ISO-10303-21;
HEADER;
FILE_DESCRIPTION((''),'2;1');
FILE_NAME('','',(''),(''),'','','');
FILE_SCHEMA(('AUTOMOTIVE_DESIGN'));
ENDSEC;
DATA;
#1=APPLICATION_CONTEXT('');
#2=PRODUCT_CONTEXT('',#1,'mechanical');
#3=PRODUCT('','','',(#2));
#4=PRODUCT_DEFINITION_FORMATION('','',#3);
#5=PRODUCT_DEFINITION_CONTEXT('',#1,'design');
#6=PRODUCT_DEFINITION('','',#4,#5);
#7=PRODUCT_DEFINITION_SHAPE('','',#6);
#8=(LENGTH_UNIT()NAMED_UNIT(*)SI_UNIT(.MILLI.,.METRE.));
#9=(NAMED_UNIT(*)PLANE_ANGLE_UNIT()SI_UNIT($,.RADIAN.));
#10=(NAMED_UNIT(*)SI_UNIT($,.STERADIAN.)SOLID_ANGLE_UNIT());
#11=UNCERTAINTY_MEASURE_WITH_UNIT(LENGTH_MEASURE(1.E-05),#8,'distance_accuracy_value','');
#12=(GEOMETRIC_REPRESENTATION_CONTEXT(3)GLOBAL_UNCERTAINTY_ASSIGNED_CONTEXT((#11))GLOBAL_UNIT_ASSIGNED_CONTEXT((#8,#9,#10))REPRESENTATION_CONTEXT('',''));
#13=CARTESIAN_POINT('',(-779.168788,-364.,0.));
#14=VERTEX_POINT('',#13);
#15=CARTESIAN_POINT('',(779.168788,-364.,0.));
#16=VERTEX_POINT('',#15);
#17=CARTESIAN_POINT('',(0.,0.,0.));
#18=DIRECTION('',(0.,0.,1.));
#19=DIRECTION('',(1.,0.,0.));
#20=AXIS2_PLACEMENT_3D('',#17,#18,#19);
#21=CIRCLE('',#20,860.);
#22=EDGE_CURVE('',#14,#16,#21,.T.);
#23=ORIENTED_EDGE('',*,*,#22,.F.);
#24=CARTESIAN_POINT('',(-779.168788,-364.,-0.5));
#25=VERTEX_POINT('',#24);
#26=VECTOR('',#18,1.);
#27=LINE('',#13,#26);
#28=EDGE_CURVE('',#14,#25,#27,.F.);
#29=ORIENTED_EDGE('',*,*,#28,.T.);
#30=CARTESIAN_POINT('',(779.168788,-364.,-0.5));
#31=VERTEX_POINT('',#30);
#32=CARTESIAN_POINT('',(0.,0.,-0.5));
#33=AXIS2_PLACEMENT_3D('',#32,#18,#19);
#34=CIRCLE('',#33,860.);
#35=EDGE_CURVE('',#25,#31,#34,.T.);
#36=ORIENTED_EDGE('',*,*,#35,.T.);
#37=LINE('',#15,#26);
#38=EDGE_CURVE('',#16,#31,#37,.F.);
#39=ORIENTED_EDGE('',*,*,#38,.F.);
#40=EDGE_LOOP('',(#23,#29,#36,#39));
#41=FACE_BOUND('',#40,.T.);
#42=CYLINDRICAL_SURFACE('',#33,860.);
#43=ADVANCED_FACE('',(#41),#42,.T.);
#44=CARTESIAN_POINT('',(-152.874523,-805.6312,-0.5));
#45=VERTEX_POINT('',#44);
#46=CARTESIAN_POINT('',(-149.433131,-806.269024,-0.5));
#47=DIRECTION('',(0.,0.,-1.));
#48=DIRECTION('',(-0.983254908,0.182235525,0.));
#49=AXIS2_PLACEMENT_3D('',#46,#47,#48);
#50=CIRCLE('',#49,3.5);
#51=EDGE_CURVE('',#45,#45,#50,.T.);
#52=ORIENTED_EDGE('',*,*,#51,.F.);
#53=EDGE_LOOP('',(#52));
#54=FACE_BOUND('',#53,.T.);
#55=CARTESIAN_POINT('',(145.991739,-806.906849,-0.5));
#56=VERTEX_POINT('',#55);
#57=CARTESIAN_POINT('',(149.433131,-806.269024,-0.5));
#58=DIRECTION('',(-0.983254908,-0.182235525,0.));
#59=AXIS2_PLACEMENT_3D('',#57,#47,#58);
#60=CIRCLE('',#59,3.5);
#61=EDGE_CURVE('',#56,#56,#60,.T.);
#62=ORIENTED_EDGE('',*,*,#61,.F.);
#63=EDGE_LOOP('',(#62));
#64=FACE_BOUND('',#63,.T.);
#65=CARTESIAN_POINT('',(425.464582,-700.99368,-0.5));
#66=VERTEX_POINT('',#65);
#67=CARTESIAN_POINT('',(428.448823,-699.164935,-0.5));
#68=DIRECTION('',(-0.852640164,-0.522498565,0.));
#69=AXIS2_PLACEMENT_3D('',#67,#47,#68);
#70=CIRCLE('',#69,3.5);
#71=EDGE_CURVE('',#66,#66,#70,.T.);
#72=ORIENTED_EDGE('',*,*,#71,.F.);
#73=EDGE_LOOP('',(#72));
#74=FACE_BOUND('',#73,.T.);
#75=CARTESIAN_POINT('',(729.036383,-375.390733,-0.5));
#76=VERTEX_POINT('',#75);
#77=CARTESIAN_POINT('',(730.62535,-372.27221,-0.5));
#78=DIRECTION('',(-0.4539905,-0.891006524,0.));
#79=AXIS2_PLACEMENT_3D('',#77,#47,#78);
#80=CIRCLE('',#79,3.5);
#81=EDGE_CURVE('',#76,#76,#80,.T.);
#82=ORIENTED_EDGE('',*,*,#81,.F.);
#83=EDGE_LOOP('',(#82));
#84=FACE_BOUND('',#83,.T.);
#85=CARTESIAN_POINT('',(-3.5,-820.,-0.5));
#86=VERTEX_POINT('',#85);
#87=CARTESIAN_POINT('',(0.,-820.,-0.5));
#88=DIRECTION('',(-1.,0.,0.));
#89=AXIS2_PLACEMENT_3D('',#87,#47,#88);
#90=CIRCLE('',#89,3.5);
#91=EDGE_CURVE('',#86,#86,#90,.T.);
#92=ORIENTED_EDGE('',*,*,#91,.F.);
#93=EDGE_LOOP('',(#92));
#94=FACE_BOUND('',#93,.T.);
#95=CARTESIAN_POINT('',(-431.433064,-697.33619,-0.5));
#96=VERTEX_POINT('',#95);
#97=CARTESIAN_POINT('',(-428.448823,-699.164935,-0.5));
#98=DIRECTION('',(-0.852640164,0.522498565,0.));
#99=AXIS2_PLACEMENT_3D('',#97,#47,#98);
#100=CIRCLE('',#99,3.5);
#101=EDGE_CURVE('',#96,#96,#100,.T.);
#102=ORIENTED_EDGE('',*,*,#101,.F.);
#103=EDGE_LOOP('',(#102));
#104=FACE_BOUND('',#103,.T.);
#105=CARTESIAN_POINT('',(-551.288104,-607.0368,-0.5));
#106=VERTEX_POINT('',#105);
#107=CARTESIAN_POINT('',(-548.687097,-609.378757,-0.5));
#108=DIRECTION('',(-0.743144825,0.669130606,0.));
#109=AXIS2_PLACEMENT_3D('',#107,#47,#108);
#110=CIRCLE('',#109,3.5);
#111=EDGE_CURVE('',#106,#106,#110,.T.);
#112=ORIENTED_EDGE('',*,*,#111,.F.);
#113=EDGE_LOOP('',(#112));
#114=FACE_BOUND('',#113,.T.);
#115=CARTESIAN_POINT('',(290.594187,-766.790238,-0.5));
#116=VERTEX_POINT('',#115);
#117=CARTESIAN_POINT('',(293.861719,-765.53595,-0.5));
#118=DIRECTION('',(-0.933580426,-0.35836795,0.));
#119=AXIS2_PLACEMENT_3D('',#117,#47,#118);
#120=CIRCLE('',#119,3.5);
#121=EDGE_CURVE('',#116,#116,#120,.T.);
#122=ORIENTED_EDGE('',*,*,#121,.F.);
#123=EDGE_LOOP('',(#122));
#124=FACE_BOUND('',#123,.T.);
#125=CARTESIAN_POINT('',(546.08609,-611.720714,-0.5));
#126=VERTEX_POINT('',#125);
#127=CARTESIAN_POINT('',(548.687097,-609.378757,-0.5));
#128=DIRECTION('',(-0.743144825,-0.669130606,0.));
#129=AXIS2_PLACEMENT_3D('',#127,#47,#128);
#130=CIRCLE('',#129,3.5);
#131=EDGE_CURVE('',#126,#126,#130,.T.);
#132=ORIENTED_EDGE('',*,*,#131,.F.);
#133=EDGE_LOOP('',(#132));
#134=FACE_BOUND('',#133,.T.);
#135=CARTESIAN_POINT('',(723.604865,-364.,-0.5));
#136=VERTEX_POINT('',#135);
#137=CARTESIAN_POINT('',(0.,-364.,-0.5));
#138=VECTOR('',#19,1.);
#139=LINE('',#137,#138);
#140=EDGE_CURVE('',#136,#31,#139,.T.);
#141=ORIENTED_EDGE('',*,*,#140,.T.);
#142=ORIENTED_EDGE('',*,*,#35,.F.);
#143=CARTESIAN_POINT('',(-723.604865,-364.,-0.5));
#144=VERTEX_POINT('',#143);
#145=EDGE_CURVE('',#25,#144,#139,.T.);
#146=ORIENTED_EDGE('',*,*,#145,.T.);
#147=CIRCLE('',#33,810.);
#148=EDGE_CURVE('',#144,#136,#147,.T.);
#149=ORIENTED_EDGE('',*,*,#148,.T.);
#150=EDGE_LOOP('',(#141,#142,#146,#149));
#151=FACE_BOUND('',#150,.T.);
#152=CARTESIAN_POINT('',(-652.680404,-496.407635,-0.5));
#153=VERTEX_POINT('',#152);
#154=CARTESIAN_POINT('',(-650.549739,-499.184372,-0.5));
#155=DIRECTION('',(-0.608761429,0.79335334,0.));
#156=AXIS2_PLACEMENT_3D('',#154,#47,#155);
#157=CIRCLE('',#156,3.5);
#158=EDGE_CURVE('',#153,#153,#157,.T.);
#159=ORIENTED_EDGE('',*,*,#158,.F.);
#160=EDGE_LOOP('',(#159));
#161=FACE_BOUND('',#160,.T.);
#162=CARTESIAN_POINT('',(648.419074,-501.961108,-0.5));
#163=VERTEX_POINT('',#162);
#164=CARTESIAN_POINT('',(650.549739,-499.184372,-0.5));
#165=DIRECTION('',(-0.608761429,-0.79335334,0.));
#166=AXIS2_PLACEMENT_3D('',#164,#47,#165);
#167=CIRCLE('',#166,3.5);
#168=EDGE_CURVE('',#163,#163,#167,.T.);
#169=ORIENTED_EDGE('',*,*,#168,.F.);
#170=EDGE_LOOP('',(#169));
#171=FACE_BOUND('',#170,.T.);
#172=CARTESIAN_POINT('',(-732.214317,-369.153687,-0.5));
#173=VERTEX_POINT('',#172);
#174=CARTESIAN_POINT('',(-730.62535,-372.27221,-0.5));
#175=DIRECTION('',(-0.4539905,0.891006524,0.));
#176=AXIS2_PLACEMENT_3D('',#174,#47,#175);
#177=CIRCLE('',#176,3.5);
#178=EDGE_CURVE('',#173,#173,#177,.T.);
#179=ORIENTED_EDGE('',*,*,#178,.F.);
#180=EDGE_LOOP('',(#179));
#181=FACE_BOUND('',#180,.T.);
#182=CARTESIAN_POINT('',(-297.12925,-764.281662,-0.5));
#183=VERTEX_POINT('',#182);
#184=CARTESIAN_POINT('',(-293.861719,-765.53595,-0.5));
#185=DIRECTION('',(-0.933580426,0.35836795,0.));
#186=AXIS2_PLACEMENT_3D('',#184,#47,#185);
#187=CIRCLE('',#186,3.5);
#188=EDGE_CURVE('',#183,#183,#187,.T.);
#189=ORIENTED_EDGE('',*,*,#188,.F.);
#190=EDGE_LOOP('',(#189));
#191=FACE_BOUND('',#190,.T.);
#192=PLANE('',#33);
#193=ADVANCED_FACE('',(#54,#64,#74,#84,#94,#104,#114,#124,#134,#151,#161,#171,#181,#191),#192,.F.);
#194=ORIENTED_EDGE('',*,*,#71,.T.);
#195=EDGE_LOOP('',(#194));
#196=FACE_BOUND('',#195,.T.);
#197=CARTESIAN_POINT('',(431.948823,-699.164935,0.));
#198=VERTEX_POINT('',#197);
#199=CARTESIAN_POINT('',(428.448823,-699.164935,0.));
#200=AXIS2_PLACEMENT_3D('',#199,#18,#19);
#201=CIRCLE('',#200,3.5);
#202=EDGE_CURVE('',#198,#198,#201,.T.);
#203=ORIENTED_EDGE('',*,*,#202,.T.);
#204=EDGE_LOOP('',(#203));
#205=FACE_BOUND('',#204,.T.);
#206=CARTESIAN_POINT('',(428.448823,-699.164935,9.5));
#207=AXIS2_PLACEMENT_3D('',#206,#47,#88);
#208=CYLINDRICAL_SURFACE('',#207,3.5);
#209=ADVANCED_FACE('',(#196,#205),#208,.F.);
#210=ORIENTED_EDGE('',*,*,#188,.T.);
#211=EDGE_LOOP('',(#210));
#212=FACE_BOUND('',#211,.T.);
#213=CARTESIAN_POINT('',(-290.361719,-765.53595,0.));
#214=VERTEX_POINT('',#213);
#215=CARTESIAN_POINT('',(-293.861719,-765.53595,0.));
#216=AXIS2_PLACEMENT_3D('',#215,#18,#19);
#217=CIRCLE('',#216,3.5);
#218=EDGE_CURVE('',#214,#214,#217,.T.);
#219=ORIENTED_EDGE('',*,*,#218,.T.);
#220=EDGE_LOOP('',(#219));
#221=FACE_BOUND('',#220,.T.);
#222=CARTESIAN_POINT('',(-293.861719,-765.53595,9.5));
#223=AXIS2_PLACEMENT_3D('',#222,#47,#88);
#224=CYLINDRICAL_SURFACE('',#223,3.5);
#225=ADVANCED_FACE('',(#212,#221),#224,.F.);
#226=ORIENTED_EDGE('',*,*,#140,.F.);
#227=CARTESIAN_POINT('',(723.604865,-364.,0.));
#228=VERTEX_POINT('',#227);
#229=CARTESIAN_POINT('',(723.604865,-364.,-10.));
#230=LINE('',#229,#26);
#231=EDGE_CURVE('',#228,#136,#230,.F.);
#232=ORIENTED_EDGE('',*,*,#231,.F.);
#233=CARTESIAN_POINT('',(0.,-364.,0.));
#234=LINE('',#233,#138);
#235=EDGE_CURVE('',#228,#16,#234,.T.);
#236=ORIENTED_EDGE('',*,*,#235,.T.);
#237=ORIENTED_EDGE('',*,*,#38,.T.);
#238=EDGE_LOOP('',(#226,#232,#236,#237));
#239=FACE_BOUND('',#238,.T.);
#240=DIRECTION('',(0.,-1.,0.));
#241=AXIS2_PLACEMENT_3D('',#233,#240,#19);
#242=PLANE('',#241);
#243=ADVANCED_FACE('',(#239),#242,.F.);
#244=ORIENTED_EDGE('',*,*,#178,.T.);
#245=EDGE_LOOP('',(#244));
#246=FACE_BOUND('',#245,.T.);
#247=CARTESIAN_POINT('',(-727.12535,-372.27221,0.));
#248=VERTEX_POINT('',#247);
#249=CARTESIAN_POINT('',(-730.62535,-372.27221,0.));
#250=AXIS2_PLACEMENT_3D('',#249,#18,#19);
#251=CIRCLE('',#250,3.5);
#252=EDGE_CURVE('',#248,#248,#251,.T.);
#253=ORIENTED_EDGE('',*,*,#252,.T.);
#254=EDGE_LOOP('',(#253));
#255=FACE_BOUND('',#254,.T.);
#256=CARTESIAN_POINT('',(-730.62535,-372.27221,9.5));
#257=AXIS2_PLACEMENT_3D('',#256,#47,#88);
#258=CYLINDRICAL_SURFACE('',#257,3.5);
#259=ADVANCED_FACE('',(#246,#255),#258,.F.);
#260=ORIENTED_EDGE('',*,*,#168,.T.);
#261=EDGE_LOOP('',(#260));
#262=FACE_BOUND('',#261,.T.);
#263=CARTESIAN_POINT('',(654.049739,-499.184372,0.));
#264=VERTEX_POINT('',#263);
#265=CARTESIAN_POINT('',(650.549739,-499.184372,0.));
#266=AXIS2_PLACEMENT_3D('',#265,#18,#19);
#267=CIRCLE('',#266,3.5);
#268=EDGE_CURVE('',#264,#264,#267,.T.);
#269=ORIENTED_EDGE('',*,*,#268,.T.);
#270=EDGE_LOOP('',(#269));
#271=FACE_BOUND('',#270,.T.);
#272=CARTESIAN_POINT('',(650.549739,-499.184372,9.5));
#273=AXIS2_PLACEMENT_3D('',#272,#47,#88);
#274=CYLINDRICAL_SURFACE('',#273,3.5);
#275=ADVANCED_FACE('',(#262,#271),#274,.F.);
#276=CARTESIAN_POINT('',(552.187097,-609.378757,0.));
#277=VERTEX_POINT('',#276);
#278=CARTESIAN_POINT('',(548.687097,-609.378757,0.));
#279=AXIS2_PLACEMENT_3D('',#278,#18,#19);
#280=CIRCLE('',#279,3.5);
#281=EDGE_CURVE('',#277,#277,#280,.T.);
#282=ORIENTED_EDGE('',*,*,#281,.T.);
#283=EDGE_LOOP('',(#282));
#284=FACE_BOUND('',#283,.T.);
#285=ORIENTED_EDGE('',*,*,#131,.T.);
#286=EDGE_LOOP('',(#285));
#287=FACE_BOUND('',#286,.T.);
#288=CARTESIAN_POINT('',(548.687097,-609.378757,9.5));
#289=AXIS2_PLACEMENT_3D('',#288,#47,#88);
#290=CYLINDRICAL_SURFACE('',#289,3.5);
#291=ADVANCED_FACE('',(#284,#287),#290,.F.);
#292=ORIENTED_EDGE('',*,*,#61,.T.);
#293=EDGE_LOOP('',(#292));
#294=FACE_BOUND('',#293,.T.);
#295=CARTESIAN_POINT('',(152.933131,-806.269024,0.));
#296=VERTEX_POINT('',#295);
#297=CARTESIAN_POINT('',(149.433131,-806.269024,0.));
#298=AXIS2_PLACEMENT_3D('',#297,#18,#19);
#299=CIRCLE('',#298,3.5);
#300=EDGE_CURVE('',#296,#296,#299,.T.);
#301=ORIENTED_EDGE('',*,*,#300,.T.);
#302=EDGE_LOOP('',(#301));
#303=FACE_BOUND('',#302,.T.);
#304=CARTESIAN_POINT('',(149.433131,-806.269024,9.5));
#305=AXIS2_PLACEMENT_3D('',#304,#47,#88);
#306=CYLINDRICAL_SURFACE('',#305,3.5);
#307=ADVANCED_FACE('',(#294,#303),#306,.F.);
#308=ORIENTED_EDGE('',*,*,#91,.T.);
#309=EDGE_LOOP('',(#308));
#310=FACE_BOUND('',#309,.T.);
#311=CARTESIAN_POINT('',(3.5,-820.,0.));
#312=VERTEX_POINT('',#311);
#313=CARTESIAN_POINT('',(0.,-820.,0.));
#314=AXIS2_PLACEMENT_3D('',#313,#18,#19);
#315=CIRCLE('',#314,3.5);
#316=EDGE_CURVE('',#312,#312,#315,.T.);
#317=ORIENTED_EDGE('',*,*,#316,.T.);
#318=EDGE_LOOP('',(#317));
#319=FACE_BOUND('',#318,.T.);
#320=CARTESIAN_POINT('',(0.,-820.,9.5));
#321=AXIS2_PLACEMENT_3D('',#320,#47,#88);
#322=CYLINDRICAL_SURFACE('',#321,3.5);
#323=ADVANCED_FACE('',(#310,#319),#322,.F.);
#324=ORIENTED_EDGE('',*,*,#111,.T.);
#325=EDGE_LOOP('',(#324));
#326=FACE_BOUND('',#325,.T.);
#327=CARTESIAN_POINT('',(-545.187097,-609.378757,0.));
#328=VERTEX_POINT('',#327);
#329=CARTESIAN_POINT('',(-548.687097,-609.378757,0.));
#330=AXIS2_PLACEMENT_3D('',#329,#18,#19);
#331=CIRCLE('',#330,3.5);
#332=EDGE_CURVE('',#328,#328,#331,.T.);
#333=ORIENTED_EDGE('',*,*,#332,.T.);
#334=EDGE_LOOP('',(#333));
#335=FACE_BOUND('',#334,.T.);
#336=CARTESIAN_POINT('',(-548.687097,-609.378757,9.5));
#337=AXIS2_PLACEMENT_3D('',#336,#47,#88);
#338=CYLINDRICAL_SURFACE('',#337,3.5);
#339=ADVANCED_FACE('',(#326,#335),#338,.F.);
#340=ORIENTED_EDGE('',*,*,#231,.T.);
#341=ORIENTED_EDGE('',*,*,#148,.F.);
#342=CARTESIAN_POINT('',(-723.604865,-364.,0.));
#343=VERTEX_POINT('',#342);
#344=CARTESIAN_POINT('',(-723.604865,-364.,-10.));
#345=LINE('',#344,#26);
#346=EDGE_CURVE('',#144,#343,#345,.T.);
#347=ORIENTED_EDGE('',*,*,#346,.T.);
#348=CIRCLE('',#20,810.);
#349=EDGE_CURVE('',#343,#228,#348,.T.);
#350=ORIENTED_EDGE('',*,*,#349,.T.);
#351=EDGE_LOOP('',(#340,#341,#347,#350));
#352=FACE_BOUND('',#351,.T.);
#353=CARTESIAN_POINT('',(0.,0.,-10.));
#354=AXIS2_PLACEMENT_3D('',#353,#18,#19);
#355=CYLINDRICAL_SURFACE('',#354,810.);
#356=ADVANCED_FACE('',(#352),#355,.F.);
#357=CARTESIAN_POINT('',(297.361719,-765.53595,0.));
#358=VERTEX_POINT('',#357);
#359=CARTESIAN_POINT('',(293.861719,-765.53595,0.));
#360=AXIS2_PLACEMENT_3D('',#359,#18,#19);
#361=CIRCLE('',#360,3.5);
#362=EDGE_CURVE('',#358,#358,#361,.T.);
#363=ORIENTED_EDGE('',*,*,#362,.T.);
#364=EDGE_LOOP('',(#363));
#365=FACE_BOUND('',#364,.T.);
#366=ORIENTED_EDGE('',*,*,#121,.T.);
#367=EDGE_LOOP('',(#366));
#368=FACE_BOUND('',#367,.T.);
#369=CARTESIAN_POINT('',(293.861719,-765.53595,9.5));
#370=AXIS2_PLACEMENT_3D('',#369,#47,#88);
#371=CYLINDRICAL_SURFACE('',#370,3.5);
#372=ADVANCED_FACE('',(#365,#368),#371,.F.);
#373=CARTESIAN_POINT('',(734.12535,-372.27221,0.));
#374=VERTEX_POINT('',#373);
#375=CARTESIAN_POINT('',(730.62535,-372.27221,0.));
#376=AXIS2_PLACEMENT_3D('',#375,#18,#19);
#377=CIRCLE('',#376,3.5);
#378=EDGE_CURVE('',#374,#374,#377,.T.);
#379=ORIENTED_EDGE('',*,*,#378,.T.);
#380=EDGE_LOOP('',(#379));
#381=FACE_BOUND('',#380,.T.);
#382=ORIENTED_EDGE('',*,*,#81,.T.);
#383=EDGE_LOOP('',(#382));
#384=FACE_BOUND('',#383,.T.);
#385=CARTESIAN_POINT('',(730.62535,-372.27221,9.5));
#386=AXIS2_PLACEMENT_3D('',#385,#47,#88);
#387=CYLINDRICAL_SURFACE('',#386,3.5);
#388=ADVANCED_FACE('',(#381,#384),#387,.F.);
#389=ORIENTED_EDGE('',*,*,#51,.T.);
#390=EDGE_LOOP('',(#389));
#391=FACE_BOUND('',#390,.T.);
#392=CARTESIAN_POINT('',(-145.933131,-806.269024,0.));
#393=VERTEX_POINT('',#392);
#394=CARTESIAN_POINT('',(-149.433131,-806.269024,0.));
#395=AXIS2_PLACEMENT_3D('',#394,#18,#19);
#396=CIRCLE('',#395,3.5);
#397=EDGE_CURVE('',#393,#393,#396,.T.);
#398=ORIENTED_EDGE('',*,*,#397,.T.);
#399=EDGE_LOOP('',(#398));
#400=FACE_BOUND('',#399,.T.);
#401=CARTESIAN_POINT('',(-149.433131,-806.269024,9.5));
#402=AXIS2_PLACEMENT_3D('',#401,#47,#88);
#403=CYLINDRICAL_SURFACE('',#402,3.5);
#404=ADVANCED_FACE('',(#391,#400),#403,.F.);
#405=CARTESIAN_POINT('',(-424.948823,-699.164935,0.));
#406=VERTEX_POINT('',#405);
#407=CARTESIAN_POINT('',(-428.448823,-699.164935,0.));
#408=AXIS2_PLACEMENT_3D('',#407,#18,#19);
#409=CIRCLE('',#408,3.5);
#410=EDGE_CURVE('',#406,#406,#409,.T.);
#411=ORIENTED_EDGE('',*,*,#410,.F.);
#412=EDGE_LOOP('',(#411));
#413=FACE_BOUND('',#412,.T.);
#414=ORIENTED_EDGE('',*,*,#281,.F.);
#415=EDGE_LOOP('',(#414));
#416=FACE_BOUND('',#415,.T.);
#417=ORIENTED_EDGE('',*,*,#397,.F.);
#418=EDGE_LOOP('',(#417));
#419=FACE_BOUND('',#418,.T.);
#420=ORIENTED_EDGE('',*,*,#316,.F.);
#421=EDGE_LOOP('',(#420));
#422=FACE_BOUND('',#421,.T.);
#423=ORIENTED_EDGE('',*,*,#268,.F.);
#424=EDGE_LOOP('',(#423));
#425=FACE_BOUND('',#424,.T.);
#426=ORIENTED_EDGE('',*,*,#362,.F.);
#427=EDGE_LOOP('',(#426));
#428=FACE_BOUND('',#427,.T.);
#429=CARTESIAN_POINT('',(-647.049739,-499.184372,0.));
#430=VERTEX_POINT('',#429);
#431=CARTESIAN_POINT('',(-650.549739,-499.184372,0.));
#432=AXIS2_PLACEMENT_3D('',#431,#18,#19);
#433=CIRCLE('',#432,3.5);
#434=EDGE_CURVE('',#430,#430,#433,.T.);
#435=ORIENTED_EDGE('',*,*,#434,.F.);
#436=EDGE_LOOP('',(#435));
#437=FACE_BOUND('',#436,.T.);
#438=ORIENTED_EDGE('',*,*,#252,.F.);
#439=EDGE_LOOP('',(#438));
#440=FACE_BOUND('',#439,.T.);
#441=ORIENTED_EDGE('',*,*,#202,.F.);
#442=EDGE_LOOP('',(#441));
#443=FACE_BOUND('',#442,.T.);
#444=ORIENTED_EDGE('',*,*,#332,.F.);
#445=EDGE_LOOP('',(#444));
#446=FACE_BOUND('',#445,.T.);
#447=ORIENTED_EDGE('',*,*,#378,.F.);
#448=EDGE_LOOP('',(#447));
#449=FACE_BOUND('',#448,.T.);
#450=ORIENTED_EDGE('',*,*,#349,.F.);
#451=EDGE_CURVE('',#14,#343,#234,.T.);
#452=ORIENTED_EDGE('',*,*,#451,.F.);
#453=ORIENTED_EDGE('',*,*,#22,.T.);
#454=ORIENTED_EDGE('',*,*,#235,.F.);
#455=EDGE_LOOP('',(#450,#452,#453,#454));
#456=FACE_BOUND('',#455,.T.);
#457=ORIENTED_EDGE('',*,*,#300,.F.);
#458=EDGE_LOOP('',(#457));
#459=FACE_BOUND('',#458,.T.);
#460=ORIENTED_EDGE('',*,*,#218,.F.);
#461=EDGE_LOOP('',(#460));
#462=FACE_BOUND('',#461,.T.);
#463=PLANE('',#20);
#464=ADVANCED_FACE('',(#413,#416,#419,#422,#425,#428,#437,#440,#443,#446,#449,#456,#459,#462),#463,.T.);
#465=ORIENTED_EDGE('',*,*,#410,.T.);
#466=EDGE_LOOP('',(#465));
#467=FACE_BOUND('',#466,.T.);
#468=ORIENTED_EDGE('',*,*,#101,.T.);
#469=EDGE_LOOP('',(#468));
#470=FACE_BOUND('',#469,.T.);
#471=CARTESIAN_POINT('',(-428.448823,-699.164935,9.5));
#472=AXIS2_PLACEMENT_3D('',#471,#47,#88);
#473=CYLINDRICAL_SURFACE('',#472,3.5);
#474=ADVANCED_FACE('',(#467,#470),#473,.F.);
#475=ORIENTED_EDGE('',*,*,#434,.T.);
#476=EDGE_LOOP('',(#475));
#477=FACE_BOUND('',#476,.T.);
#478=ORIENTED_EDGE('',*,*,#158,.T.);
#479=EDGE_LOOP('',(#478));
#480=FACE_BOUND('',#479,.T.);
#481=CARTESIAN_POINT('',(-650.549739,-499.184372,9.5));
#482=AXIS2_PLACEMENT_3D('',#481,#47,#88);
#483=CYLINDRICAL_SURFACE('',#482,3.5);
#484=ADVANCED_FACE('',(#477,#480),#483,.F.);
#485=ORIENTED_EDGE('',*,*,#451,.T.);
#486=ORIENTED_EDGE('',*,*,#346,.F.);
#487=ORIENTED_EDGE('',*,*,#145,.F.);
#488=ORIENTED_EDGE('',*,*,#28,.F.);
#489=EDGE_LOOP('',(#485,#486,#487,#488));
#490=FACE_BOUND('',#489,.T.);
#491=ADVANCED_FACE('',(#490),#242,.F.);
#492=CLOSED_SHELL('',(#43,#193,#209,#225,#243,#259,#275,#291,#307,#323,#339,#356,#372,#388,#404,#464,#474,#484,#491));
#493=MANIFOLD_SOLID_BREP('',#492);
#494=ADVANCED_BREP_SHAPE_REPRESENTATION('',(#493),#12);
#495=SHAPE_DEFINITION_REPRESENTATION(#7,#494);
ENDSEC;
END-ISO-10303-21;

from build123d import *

# Parameters (mm, degrees)
BASE_FLANGE1_DEPTH              = 0.5
SKETCH2_W                       = 1968.518691842
SKETCH2_H                       = 782.123286761
CUT_EXTRUDE1_DEPTH              = 10
CUT_EXTRUDE3_DEPTH              = 10
SKETCH10_R                      = 3.5
CUT_EXTRUDE4_DEPTH              = 10
CIRPATTERN1_COUNT               = 10
CIRPATTERN1_ANGLE               = 94.5
CIRPATTERN1_THE_OTHER_WAY_COUNT = 10
CIRPATTERN1_THE_OTHER_WAY_ANGLE = 94.5


# Sheet-metal steps are written as plain solids
with BuildPart() as part:
    # Sketch1 → Base-Flange1 (new body)
    with BuildSketch(Plane.XY):
        with BuildLine():
            Line((859.985464993, -5), (-859.985464993, -5))
            ThreePointArc((-859.985464993, -5), (0, -860), (859.985464993, -5))
        make_face()
    extrude(amount=-BASE_FLANGE1_DEPTH)

    # Sketch2 → Cut-Extrude1 (cut)
    with BuildSketch(Plane.XY):
        with Locations((10.387961435, 27.061643381)):
            Rectangle(SKETCH2_W, SKETCH2_H)
    extrude(amount=-CUT_EXTRUDE1_DEPTH, mode=Mode.SUBTRACT)

    # Sketch9 → Cut-Extrude3 (cut)
    with BuildSketch(Plane.XY):
        with BuildLine():
            Line((-723.60486455, -364), (723.60486455, -364))
            ThreePointArc((723.60486455, -364), (0, -810), (-723.60486455, -364))
        make_face()
    extrude(amount=-CUT_EXTRUDE3_DEPTH, mode=Mode.SUBTRACT)

    # Sketch10 → Cut-Extrude4 (cut)
    with BuildSketch(Plane(origin=(0, 0, -0.5), x_dir=(-1, 0, 0), z_dir=(0, 0, -1))):
        with Locations((0, -820)):
            Circle(SKETCH10_R)
    cut_extrude4 = extrude(amount=-CUT_EXTRUDE4_DEPTH, mode=Mode.SUBTRACT)

    # CirPattern1: Cut-Extrude4 ×10 about axis
    cirpattern1_axis = Axis((0, 0, 0), (0, 0, 1))
    for i in range(1, CIRPATTERN1_COUNT):
        add(cut_extrude4.rotate(cirpattern1_axis, i * CIRPATTERN1_ANGLE / (CIRPATTERN1_COUNT - 1)), mode=Mode.SUBTRACT)

    # CirPattern1 the other way: Cut-Extrude4 ×10 about axis
    cirpattern1_the_other_way_axis = Axis((0, 0, 0), (0, 0, -1))
    for i in range(1, CIRPATTERN1_THE_OTHER_WAY_COUNT):
        add(cut_extrude4.rotate(cirpattern1_the_other_way_axis, i * CIRPATTERN1_THE_OTHER_WAY_ANGLE / (CIRPATTERN1_THE_OTHER_WAY_COUNT - 1)), mode=Mode.SUBTRACT)


solid = part.part
